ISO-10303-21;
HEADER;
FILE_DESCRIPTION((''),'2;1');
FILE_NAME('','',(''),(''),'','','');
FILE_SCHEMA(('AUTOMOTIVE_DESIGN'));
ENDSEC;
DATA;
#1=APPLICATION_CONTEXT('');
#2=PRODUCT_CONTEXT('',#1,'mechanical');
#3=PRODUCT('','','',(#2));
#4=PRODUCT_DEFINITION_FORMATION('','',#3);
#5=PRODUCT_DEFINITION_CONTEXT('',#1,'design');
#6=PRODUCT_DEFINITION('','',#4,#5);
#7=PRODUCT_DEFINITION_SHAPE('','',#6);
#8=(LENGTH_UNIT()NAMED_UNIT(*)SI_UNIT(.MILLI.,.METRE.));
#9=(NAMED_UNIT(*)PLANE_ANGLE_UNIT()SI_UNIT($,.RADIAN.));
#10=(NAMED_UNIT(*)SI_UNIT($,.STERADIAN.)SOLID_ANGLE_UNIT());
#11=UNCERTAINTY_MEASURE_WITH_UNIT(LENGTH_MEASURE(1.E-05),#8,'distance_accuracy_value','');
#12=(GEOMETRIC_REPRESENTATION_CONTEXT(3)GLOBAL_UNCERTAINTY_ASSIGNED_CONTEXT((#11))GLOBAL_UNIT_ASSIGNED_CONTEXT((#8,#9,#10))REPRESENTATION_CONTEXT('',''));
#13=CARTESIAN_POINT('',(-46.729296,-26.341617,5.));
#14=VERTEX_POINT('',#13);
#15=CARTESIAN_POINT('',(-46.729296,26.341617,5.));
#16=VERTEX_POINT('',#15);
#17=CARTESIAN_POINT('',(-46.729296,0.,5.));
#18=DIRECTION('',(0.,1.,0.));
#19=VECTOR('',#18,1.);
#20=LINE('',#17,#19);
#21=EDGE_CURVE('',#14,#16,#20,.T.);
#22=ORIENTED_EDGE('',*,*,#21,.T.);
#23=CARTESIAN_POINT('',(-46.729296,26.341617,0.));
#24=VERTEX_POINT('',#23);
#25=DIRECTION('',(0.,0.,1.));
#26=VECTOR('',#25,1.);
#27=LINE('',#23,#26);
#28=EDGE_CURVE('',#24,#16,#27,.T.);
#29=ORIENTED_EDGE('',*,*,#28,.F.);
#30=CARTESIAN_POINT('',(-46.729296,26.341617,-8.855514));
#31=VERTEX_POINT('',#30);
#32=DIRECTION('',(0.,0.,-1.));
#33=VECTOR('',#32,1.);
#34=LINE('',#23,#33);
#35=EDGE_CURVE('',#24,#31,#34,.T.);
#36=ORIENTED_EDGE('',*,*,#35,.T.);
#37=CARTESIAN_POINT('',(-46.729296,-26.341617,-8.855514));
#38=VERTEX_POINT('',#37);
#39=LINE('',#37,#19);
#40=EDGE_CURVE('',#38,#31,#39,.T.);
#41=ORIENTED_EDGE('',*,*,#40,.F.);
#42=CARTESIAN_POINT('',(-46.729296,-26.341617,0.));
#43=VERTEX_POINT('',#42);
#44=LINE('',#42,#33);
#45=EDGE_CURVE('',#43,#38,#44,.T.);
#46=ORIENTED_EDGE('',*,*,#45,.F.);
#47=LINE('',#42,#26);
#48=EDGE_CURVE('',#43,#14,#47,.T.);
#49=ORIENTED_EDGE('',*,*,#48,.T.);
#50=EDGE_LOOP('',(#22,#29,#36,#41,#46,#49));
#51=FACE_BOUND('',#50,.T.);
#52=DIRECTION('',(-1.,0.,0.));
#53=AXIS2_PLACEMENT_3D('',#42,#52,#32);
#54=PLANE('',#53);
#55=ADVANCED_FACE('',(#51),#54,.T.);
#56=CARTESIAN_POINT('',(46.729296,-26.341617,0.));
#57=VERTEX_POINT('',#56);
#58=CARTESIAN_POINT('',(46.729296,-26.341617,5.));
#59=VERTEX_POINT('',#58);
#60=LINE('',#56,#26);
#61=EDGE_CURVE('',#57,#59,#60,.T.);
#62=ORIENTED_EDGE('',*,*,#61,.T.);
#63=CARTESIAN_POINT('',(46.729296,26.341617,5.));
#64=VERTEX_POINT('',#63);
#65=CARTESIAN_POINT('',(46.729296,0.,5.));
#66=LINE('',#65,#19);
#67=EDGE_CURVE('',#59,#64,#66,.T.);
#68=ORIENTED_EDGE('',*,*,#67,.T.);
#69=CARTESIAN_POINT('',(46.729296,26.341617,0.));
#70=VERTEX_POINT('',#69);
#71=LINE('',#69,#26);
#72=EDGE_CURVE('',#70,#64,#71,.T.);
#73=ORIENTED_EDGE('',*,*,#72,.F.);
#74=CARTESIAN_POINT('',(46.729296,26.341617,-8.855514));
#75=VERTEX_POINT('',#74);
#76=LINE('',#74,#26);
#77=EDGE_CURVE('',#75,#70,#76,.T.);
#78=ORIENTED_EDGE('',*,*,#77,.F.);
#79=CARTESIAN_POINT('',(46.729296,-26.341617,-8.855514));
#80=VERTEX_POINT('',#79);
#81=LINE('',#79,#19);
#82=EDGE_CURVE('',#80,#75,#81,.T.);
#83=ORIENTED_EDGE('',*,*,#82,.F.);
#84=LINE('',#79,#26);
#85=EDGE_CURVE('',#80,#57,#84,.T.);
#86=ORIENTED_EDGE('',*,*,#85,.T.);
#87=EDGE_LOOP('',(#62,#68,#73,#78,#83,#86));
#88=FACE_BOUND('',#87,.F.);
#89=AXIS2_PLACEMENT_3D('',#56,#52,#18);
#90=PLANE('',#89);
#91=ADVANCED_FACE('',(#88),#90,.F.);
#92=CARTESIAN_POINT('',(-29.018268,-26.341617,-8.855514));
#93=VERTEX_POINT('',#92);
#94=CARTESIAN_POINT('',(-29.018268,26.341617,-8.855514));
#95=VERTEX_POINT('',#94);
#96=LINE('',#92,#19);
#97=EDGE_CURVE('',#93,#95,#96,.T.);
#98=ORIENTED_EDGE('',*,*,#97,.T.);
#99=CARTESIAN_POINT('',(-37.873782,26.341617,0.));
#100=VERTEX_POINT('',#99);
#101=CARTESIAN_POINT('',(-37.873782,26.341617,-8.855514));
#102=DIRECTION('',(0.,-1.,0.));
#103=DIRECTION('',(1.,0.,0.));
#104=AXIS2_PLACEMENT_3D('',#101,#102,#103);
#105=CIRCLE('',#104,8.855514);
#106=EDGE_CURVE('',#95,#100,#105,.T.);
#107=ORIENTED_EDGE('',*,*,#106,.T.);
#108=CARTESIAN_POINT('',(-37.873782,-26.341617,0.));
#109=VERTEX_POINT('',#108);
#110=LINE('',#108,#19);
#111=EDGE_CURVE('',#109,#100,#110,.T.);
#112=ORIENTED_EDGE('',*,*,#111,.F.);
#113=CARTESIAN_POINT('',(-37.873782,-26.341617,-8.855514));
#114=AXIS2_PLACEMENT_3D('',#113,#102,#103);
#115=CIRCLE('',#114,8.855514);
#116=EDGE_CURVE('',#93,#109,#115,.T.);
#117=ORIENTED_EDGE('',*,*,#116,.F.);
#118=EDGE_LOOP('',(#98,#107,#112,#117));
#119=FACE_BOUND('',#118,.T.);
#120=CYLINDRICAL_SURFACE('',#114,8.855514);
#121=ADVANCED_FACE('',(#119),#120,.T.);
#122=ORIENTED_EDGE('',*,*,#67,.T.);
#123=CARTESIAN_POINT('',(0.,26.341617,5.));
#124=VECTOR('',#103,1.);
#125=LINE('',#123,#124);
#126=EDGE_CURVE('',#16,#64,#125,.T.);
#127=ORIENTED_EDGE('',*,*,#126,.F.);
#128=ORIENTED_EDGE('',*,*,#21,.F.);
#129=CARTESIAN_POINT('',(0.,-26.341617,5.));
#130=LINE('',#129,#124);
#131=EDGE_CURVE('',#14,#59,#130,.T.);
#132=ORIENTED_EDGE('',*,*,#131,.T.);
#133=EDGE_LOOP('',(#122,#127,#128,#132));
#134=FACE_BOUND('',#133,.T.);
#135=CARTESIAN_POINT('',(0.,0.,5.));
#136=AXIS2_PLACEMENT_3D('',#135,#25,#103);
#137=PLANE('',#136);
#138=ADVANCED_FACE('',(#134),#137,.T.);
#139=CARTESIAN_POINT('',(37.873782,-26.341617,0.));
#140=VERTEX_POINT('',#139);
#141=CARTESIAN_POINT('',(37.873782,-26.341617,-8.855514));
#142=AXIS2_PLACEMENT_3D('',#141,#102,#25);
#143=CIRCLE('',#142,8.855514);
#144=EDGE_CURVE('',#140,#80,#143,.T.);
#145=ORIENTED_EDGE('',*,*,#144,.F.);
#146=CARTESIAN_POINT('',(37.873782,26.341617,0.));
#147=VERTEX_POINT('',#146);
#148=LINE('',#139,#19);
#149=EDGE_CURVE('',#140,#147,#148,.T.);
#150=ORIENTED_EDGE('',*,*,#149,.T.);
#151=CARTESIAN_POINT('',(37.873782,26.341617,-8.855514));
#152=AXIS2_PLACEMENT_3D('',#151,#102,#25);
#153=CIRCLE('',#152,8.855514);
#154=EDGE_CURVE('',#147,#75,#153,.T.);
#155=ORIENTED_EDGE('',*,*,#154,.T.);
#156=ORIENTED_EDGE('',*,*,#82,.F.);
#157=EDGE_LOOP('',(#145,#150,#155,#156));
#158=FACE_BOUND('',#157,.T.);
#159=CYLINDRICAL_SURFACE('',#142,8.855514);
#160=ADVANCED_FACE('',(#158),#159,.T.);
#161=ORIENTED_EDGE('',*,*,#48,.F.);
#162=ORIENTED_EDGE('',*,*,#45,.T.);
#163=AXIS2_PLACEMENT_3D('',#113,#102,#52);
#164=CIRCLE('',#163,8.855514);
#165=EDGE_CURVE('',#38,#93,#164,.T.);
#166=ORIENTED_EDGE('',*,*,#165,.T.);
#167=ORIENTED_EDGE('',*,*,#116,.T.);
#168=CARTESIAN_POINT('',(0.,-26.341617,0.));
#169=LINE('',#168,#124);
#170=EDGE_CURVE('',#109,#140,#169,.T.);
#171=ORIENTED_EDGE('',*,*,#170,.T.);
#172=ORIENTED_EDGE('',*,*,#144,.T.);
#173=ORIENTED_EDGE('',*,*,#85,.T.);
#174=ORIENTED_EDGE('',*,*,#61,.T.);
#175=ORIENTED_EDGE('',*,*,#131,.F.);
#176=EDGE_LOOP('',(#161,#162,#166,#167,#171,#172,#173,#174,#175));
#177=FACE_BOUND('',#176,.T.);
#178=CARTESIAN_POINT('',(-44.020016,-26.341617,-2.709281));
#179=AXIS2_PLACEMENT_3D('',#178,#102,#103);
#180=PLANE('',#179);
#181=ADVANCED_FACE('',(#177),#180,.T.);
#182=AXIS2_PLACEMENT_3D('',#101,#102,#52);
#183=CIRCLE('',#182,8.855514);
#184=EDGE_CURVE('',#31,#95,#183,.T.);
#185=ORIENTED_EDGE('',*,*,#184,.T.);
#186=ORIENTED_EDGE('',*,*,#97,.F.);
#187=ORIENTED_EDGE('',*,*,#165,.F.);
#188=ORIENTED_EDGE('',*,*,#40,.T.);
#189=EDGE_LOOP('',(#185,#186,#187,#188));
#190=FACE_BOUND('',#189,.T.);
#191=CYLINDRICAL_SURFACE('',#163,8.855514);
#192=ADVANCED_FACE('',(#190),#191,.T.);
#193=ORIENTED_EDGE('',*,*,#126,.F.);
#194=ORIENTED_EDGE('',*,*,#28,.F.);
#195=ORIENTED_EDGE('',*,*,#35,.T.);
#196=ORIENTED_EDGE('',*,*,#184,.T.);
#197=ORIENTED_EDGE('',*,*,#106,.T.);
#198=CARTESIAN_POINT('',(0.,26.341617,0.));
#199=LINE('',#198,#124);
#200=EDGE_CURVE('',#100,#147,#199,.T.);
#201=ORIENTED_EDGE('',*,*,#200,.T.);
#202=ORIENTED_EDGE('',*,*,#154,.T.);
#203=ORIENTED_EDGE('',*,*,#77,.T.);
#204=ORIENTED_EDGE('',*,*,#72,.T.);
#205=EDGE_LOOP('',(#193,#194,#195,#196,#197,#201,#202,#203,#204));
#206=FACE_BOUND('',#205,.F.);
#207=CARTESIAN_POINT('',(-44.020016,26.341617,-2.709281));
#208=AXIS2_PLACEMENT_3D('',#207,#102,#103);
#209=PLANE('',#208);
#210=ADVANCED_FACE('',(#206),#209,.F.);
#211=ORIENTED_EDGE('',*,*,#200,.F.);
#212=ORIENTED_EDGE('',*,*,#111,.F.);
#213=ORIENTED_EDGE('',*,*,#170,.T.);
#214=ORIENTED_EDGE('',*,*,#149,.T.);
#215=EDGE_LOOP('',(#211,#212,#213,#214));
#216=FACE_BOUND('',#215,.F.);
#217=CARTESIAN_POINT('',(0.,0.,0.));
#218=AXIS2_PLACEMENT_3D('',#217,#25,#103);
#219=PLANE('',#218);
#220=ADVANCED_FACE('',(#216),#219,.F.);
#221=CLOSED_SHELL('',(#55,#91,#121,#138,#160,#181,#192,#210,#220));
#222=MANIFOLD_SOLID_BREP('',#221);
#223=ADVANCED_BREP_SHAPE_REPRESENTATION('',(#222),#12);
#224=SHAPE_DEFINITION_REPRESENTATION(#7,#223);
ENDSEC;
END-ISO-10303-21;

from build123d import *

# Parameters (mm, degrees)
F0_W     = 93.4585928917
F0_H     = 52.6832342148
F1_DEPTH = 5
F3_DEPTH = 52.6832342148


# Not quite as in the source:
# - a feature names something its author has since deleted; it is built from what else it names


with BuildPart() as f1:
    # F0 (on Top) → F1 (new body)
    with BuildSketch(Plane.XY):
        Rectangle(F0_W, F0_H)
    extrude(amount=F1_DEPTH)

    # F2 (on face) → F3 (join, through all)
    with BuildSketch(Plane.XZ.offset(26.3416171074)):
        with BuildLine():
            ThreePointArc((-46.7292964458, -8.8555142283), (-44.1355763793, -2.5937200666), (-37.8737822175, 0))
            Line((-37.8737822175, 0), (-46.7292964458, 0))
            Line((-46.7292964458, 0), (-46.7292964458, -8.8555142283))
        make_face()
        with BuildLine():
            ThreePointArc((46.7292964458, -8.8555142283), (44.1355763793, -2.5937200666), (37.8737822175, 0))
            ThreePointArc((37.8737822175, 0), (31.6119880557, -15.1173083901), (46.7292964458, -8.8555142283))
        make_face()
        with BuildLine():
            ThreePointArc((-46.7292964458, -8.8555142283), (-37.8737822175, -17.7110284567), (-29.0182679892, -8.8555142283))
            ThreePointArc((-29.0182679892, -8.8555142283), (-31.6119880557, -2.5937200666), (-37.8737822175, 0))
            ThreePointArc((-37.8737822175, 0), (-44.1355763793, -2.5937200666), (-46.7292964458, -8.8555142283))
        make_face()
        with BuildLine():
            Line((46.7292964458, 0), (37.8737822175, 0))
            ThreePointArc((37.8737822175, 0), (44.1355763793, -2.5937200666), (46.7292964458, -8.8555142283))
            Line((46.7292964458, -8.8555142283), (46.7292964458, 0))
        make_face()
    extrude(amount=-F3_DEPTH)


solid = f1.part
